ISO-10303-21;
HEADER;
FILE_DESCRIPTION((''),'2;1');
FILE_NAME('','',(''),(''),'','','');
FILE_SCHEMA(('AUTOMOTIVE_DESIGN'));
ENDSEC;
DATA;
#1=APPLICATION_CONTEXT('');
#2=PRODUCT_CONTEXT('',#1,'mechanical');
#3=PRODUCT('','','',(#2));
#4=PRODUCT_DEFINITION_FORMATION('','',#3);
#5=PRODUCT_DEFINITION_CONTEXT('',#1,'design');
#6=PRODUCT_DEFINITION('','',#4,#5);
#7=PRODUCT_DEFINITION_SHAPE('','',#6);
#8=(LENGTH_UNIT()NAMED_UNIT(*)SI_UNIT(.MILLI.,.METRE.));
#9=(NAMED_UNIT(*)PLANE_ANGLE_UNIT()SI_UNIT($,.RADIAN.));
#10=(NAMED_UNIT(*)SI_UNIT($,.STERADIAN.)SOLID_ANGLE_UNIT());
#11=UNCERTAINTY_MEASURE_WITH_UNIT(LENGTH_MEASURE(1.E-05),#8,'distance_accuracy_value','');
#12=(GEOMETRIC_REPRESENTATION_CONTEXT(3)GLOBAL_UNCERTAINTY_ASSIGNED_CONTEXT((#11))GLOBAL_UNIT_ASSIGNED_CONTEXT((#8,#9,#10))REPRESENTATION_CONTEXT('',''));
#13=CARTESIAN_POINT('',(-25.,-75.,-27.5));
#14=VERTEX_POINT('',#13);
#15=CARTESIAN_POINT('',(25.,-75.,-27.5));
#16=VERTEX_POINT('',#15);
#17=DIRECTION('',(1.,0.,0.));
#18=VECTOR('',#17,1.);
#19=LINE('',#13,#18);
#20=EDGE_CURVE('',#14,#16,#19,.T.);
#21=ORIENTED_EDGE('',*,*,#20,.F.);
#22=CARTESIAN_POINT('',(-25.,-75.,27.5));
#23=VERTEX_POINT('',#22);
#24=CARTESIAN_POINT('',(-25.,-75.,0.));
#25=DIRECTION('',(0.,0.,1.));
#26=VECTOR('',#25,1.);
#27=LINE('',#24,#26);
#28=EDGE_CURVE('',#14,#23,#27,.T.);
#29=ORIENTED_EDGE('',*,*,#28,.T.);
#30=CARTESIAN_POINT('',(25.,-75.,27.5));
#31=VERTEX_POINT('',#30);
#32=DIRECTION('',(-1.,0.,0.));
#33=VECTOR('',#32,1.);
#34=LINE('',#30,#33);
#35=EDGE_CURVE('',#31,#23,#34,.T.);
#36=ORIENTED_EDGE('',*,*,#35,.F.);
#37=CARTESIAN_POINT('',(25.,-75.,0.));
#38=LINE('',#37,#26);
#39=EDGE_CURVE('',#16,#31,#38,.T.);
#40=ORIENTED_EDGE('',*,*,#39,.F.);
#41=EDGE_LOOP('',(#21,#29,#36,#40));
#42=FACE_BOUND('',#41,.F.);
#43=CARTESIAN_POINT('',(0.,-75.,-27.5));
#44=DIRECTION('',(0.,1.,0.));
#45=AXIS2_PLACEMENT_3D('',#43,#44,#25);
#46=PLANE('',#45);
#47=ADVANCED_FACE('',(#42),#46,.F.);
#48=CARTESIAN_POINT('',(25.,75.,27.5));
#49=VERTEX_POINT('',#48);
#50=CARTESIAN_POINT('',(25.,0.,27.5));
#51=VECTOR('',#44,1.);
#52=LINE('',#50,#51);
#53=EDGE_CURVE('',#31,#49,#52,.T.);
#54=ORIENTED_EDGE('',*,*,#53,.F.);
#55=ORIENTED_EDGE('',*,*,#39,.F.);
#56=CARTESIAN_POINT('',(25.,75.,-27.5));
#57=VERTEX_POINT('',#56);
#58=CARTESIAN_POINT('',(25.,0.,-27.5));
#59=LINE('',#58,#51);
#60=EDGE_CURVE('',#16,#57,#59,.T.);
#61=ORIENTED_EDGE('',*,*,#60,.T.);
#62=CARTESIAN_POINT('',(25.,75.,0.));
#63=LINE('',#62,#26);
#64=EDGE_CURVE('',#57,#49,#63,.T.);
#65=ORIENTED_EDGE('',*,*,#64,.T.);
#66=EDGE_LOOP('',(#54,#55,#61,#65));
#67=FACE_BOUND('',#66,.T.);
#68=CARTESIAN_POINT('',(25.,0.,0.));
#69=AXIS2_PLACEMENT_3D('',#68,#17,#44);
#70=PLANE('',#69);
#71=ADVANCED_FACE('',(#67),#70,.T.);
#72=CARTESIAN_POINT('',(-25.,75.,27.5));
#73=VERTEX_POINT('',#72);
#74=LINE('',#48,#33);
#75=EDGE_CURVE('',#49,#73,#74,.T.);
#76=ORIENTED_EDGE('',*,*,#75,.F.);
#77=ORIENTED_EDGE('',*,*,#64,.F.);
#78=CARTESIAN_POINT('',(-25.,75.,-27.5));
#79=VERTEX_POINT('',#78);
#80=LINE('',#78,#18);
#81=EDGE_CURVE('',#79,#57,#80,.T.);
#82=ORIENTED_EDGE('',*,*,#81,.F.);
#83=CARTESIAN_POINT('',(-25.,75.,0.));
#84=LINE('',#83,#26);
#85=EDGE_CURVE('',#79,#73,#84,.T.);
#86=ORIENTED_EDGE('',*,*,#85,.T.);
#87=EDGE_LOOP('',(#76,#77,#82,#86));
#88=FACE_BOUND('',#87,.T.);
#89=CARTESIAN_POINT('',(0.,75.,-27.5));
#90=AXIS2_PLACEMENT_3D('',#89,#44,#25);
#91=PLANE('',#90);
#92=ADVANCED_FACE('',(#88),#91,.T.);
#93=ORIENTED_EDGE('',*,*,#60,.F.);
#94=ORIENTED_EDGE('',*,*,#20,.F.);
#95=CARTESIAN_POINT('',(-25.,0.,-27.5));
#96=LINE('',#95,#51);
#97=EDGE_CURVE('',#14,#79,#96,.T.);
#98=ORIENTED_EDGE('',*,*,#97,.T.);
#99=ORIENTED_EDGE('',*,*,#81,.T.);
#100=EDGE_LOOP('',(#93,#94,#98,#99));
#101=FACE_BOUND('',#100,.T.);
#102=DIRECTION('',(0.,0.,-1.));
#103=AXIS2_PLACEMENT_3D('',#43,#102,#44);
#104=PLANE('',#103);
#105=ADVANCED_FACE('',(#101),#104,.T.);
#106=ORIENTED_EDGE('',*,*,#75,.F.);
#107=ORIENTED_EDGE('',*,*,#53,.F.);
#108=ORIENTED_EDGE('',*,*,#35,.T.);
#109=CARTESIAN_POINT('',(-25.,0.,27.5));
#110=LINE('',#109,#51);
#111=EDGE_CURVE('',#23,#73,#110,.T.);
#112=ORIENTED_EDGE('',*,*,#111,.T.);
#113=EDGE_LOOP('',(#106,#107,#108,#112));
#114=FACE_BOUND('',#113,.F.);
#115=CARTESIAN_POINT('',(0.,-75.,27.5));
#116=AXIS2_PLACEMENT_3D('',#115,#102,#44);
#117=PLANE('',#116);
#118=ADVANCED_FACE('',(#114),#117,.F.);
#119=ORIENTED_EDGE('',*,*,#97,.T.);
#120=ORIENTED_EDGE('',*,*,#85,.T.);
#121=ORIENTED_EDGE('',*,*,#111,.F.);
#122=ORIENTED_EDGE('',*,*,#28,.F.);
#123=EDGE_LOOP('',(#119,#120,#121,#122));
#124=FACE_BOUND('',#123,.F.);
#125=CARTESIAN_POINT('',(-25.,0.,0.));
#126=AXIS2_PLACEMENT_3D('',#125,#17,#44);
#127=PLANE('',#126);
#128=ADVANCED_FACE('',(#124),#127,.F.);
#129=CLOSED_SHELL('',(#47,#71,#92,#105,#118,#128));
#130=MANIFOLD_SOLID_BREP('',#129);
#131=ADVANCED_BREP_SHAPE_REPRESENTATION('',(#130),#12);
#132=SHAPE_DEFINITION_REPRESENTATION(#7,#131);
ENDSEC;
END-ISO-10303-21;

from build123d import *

# Parameters (mm, degrees)
F0_W          = 150
F0_H          = 55
F1_DEPTH      = 25
F1_DEPTH_BACK = 25


# Not quite as in the source:
# - a feature of the source that left no trace in its solid (it failed there, or was rolled back) is left out


with BuildPart() as f1:
    # F0 (on Right) → F1 (new body, two sides)
    with BuildSketch(Plane.YZ) as f1_sk:
        Rectangle(F0_W, F0_H)
    extrude(amount=F1_DEPTH)
    extrude(f1_sk.sketch, amount=-F1_DEPTH_BACK)


solid = f1.part
